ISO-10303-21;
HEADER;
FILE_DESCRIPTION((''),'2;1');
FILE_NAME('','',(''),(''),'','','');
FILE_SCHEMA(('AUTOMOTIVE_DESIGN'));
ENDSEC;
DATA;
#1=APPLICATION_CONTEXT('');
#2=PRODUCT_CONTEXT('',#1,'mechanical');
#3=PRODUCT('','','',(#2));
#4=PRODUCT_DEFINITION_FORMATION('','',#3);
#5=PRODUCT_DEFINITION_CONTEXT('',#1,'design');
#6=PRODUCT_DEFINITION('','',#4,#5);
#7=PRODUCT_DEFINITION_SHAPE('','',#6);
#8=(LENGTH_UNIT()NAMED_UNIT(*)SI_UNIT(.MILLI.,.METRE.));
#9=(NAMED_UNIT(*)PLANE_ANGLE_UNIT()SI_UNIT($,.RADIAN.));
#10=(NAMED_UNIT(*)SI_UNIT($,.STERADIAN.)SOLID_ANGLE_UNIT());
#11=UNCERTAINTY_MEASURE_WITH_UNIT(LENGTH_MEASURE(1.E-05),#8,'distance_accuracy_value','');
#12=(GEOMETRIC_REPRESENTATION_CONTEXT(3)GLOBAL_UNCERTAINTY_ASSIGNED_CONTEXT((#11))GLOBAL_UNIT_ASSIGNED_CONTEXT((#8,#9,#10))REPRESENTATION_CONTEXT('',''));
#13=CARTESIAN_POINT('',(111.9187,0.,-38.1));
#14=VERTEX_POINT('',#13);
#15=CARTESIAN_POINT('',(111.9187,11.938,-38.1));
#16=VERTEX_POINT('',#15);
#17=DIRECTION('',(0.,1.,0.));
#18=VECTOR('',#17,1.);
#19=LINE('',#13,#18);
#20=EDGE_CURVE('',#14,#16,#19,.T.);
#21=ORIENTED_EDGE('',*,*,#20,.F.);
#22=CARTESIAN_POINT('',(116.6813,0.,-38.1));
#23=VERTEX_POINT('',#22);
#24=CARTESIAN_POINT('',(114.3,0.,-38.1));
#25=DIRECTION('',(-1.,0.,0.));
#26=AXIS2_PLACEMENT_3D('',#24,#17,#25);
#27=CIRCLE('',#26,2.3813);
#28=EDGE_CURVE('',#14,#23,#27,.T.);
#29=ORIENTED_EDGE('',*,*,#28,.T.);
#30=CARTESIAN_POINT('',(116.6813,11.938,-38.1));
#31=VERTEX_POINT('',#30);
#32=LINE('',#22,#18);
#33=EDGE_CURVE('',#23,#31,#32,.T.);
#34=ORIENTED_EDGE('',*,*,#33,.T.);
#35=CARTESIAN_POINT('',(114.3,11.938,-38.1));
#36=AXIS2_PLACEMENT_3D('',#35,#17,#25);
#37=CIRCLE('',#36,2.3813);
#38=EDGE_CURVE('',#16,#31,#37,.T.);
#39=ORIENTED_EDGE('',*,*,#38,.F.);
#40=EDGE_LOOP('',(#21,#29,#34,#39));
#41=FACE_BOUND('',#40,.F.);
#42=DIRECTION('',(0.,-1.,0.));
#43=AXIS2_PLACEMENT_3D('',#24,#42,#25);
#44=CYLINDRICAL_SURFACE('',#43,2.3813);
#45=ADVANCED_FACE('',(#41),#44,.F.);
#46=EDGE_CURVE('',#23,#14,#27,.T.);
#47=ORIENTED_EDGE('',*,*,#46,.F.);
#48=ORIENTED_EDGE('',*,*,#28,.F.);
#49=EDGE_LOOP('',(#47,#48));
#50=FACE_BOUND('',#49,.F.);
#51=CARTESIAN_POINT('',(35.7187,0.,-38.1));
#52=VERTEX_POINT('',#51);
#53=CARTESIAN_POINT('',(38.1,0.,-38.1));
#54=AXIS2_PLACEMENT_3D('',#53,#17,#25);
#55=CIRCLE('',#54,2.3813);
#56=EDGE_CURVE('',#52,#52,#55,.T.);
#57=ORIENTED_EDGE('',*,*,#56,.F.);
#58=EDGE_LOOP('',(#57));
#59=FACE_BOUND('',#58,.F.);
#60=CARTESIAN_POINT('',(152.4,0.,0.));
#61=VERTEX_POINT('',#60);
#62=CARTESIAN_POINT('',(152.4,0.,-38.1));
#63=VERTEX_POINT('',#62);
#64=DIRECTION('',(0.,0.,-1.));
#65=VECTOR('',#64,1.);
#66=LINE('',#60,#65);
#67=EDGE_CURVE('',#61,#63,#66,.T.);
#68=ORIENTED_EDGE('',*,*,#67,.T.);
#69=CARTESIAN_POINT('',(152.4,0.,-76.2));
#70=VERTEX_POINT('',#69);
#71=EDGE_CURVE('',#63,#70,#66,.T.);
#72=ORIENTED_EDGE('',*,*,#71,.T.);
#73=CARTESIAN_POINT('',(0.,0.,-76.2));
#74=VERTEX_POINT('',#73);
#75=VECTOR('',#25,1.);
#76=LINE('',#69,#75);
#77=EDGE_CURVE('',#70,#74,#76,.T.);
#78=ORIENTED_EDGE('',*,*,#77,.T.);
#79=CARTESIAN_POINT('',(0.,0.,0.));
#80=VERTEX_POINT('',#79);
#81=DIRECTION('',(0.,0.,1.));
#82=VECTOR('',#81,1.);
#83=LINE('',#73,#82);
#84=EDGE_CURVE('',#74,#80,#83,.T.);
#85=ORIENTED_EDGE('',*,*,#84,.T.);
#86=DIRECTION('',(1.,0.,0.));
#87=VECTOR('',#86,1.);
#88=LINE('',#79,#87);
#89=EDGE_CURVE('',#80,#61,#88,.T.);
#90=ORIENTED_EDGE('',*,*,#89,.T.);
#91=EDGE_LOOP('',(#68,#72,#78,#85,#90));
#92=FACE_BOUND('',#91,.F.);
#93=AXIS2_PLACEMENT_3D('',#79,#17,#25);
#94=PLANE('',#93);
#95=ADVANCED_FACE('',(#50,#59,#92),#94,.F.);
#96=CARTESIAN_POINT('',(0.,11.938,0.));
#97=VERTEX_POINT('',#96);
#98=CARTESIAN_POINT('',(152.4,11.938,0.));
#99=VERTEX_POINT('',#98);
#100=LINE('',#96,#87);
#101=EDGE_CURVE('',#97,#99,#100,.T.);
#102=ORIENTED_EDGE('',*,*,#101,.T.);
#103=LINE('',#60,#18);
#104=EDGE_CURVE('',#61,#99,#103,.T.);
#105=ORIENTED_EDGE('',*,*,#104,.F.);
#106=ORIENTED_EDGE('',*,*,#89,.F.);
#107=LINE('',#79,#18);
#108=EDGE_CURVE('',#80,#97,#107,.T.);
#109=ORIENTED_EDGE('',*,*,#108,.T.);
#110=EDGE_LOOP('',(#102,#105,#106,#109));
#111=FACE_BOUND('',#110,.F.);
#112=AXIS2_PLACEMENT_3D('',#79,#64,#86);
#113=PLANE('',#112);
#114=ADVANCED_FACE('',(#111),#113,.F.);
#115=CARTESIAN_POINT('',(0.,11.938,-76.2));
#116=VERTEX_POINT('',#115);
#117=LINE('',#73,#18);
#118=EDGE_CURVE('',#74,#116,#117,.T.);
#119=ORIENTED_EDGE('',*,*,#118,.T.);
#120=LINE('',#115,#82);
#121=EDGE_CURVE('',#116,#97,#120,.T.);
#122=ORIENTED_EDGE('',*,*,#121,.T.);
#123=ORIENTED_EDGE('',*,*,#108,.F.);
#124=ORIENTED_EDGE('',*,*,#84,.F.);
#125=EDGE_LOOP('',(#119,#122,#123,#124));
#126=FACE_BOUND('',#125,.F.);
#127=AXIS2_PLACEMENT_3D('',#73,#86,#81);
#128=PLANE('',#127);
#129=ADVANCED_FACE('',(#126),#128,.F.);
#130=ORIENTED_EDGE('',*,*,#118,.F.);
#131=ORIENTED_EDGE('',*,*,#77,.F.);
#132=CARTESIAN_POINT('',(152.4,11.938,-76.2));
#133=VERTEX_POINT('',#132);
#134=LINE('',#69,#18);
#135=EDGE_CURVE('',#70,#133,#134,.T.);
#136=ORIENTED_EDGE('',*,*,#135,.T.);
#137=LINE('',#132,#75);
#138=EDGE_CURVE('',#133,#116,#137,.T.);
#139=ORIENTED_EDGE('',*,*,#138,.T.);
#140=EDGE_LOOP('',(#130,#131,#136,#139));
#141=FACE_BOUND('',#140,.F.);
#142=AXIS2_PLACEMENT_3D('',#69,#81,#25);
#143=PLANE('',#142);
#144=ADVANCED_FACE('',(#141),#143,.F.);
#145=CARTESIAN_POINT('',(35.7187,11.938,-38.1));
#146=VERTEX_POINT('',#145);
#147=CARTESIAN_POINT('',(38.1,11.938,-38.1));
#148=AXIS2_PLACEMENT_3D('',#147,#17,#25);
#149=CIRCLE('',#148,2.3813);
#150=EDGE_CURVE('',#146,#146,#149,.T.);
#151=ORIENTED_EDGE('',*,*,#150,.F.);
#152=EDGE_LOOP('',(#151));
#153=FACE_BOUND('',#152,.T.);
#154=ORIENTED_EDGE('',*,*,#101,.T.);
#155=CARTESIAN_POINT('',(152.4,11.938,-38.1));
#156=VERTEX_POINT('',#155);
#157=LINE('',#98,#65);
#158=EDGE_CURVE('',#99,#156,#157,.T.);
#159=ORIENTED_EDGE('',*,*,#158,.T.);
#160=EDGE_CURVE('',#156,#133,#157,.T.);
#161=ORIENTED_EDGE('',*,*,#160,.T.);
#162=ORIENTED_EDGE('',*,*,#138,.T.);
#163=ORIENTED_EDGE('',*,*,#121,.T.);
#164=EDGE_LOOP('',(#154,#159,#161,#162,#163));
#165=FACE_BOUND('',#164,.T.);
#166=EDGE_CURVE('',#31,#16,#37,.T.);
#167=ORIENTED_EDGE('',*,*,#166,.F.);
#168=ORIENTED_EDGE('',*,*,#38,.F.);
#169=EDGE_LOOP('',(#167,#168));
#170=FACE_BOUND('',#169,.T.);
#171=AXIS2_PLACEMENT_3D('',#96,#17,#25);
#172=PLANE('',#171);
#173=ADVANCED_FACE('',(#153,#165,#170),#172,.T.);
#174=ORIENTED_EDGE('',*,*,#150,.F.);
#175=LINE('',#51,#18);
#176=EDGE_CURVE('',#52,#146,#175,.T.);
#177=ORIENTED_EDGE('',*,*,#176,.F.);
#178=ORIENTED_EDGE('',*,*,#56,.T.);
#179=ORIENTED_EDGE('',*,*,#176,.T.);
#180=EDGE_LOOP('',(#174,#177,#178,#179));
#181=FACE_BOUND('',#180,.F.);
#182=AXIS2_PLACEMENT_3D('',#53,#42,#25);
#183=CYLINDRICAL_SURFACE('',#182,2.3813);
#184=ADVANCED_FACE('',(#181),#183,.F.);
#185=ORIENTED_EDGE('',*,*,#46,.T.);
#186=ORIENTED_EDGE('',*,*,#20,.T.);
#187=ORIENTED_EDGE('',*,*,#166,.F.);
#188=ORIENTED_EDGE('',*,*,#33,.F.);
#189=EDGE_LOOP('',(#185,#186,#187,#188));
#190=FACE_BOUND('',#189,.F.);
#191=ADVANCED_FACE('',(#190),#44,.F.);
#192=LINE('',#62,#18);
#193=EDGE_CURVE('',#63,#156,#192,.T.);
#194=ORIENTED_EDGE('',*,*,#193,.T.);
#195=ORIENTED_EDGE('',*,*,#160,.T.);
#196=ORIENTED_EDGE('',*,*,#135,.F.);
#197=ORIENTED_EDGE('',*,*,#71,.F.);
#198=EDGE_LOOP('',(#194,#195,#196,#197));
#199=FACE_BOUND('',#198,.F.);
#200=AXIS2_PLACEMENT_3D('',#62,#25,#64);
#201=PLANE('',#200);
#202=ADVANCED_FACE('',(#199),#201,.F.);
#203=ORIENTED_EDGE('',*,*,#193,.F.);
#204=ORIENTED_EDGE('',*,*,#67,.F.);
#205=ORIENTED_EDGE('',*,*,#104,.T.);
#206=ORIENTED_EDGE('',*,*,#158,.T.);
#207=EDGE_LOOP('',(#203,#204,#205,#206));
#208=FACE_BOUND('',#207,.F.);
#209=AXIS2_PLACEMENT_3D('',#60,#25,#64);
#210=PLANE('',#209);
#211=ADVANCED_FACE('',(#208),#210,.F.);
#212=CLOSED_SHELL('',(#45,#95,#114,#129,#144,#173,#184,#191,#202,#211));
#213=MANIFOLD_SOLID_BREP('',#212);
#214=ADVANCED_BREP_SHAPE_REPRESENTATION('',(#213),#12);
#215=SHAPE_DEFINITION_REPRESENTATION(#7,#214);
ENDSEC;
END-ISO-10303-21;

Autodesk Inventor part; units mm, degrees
ref_plane "YZ Plane" through (0, 0, 0) normal (1, 0, 0) x (0, 1, 0)
ref_plane "XZ Plane" through (0, 0, 0) normal (0, 1, 0) x (-1, 0, 0)
ref_plane "XY Plane" through (0, 0, 0) normal (0, 0, 1) x (1, 0, 0)
sketch "Sketch1" plane through (0, 0, 0) normal (0, 1, 0) x (-1, 0, 0)
  line L0 (0, 0) -> (-152.4, 0)
  line L1 (-152.4, 0) -> (-152.4, -76.2)
  line L2 (-152.4, -76.2) -> (0, -76.2)
  line L3 (0, -76.2) -> (0, 0)
  line L4 (-152.4, -38.1) -> (0, -38.1) construction
  line L5 (-152.4, -38.1) -> (-114.3, -38.1)
  circle A0 centre (-114.3, -38.1) radius 2.3813
  line L6 (-76.2, 0) -> (-76.2, -76.2) construction
  circle A1 centre (-38.1, -38.1) radius 2.3813
  dimension "d0" = 152.4
  dimension "d1" = 76.2
  dimension "d10" = 38.1
  dimension "d11" = 4.7625
extrude "Extrusion1" add sketch "Sketch1" along normal blind 11.938
properties part number "flat"
